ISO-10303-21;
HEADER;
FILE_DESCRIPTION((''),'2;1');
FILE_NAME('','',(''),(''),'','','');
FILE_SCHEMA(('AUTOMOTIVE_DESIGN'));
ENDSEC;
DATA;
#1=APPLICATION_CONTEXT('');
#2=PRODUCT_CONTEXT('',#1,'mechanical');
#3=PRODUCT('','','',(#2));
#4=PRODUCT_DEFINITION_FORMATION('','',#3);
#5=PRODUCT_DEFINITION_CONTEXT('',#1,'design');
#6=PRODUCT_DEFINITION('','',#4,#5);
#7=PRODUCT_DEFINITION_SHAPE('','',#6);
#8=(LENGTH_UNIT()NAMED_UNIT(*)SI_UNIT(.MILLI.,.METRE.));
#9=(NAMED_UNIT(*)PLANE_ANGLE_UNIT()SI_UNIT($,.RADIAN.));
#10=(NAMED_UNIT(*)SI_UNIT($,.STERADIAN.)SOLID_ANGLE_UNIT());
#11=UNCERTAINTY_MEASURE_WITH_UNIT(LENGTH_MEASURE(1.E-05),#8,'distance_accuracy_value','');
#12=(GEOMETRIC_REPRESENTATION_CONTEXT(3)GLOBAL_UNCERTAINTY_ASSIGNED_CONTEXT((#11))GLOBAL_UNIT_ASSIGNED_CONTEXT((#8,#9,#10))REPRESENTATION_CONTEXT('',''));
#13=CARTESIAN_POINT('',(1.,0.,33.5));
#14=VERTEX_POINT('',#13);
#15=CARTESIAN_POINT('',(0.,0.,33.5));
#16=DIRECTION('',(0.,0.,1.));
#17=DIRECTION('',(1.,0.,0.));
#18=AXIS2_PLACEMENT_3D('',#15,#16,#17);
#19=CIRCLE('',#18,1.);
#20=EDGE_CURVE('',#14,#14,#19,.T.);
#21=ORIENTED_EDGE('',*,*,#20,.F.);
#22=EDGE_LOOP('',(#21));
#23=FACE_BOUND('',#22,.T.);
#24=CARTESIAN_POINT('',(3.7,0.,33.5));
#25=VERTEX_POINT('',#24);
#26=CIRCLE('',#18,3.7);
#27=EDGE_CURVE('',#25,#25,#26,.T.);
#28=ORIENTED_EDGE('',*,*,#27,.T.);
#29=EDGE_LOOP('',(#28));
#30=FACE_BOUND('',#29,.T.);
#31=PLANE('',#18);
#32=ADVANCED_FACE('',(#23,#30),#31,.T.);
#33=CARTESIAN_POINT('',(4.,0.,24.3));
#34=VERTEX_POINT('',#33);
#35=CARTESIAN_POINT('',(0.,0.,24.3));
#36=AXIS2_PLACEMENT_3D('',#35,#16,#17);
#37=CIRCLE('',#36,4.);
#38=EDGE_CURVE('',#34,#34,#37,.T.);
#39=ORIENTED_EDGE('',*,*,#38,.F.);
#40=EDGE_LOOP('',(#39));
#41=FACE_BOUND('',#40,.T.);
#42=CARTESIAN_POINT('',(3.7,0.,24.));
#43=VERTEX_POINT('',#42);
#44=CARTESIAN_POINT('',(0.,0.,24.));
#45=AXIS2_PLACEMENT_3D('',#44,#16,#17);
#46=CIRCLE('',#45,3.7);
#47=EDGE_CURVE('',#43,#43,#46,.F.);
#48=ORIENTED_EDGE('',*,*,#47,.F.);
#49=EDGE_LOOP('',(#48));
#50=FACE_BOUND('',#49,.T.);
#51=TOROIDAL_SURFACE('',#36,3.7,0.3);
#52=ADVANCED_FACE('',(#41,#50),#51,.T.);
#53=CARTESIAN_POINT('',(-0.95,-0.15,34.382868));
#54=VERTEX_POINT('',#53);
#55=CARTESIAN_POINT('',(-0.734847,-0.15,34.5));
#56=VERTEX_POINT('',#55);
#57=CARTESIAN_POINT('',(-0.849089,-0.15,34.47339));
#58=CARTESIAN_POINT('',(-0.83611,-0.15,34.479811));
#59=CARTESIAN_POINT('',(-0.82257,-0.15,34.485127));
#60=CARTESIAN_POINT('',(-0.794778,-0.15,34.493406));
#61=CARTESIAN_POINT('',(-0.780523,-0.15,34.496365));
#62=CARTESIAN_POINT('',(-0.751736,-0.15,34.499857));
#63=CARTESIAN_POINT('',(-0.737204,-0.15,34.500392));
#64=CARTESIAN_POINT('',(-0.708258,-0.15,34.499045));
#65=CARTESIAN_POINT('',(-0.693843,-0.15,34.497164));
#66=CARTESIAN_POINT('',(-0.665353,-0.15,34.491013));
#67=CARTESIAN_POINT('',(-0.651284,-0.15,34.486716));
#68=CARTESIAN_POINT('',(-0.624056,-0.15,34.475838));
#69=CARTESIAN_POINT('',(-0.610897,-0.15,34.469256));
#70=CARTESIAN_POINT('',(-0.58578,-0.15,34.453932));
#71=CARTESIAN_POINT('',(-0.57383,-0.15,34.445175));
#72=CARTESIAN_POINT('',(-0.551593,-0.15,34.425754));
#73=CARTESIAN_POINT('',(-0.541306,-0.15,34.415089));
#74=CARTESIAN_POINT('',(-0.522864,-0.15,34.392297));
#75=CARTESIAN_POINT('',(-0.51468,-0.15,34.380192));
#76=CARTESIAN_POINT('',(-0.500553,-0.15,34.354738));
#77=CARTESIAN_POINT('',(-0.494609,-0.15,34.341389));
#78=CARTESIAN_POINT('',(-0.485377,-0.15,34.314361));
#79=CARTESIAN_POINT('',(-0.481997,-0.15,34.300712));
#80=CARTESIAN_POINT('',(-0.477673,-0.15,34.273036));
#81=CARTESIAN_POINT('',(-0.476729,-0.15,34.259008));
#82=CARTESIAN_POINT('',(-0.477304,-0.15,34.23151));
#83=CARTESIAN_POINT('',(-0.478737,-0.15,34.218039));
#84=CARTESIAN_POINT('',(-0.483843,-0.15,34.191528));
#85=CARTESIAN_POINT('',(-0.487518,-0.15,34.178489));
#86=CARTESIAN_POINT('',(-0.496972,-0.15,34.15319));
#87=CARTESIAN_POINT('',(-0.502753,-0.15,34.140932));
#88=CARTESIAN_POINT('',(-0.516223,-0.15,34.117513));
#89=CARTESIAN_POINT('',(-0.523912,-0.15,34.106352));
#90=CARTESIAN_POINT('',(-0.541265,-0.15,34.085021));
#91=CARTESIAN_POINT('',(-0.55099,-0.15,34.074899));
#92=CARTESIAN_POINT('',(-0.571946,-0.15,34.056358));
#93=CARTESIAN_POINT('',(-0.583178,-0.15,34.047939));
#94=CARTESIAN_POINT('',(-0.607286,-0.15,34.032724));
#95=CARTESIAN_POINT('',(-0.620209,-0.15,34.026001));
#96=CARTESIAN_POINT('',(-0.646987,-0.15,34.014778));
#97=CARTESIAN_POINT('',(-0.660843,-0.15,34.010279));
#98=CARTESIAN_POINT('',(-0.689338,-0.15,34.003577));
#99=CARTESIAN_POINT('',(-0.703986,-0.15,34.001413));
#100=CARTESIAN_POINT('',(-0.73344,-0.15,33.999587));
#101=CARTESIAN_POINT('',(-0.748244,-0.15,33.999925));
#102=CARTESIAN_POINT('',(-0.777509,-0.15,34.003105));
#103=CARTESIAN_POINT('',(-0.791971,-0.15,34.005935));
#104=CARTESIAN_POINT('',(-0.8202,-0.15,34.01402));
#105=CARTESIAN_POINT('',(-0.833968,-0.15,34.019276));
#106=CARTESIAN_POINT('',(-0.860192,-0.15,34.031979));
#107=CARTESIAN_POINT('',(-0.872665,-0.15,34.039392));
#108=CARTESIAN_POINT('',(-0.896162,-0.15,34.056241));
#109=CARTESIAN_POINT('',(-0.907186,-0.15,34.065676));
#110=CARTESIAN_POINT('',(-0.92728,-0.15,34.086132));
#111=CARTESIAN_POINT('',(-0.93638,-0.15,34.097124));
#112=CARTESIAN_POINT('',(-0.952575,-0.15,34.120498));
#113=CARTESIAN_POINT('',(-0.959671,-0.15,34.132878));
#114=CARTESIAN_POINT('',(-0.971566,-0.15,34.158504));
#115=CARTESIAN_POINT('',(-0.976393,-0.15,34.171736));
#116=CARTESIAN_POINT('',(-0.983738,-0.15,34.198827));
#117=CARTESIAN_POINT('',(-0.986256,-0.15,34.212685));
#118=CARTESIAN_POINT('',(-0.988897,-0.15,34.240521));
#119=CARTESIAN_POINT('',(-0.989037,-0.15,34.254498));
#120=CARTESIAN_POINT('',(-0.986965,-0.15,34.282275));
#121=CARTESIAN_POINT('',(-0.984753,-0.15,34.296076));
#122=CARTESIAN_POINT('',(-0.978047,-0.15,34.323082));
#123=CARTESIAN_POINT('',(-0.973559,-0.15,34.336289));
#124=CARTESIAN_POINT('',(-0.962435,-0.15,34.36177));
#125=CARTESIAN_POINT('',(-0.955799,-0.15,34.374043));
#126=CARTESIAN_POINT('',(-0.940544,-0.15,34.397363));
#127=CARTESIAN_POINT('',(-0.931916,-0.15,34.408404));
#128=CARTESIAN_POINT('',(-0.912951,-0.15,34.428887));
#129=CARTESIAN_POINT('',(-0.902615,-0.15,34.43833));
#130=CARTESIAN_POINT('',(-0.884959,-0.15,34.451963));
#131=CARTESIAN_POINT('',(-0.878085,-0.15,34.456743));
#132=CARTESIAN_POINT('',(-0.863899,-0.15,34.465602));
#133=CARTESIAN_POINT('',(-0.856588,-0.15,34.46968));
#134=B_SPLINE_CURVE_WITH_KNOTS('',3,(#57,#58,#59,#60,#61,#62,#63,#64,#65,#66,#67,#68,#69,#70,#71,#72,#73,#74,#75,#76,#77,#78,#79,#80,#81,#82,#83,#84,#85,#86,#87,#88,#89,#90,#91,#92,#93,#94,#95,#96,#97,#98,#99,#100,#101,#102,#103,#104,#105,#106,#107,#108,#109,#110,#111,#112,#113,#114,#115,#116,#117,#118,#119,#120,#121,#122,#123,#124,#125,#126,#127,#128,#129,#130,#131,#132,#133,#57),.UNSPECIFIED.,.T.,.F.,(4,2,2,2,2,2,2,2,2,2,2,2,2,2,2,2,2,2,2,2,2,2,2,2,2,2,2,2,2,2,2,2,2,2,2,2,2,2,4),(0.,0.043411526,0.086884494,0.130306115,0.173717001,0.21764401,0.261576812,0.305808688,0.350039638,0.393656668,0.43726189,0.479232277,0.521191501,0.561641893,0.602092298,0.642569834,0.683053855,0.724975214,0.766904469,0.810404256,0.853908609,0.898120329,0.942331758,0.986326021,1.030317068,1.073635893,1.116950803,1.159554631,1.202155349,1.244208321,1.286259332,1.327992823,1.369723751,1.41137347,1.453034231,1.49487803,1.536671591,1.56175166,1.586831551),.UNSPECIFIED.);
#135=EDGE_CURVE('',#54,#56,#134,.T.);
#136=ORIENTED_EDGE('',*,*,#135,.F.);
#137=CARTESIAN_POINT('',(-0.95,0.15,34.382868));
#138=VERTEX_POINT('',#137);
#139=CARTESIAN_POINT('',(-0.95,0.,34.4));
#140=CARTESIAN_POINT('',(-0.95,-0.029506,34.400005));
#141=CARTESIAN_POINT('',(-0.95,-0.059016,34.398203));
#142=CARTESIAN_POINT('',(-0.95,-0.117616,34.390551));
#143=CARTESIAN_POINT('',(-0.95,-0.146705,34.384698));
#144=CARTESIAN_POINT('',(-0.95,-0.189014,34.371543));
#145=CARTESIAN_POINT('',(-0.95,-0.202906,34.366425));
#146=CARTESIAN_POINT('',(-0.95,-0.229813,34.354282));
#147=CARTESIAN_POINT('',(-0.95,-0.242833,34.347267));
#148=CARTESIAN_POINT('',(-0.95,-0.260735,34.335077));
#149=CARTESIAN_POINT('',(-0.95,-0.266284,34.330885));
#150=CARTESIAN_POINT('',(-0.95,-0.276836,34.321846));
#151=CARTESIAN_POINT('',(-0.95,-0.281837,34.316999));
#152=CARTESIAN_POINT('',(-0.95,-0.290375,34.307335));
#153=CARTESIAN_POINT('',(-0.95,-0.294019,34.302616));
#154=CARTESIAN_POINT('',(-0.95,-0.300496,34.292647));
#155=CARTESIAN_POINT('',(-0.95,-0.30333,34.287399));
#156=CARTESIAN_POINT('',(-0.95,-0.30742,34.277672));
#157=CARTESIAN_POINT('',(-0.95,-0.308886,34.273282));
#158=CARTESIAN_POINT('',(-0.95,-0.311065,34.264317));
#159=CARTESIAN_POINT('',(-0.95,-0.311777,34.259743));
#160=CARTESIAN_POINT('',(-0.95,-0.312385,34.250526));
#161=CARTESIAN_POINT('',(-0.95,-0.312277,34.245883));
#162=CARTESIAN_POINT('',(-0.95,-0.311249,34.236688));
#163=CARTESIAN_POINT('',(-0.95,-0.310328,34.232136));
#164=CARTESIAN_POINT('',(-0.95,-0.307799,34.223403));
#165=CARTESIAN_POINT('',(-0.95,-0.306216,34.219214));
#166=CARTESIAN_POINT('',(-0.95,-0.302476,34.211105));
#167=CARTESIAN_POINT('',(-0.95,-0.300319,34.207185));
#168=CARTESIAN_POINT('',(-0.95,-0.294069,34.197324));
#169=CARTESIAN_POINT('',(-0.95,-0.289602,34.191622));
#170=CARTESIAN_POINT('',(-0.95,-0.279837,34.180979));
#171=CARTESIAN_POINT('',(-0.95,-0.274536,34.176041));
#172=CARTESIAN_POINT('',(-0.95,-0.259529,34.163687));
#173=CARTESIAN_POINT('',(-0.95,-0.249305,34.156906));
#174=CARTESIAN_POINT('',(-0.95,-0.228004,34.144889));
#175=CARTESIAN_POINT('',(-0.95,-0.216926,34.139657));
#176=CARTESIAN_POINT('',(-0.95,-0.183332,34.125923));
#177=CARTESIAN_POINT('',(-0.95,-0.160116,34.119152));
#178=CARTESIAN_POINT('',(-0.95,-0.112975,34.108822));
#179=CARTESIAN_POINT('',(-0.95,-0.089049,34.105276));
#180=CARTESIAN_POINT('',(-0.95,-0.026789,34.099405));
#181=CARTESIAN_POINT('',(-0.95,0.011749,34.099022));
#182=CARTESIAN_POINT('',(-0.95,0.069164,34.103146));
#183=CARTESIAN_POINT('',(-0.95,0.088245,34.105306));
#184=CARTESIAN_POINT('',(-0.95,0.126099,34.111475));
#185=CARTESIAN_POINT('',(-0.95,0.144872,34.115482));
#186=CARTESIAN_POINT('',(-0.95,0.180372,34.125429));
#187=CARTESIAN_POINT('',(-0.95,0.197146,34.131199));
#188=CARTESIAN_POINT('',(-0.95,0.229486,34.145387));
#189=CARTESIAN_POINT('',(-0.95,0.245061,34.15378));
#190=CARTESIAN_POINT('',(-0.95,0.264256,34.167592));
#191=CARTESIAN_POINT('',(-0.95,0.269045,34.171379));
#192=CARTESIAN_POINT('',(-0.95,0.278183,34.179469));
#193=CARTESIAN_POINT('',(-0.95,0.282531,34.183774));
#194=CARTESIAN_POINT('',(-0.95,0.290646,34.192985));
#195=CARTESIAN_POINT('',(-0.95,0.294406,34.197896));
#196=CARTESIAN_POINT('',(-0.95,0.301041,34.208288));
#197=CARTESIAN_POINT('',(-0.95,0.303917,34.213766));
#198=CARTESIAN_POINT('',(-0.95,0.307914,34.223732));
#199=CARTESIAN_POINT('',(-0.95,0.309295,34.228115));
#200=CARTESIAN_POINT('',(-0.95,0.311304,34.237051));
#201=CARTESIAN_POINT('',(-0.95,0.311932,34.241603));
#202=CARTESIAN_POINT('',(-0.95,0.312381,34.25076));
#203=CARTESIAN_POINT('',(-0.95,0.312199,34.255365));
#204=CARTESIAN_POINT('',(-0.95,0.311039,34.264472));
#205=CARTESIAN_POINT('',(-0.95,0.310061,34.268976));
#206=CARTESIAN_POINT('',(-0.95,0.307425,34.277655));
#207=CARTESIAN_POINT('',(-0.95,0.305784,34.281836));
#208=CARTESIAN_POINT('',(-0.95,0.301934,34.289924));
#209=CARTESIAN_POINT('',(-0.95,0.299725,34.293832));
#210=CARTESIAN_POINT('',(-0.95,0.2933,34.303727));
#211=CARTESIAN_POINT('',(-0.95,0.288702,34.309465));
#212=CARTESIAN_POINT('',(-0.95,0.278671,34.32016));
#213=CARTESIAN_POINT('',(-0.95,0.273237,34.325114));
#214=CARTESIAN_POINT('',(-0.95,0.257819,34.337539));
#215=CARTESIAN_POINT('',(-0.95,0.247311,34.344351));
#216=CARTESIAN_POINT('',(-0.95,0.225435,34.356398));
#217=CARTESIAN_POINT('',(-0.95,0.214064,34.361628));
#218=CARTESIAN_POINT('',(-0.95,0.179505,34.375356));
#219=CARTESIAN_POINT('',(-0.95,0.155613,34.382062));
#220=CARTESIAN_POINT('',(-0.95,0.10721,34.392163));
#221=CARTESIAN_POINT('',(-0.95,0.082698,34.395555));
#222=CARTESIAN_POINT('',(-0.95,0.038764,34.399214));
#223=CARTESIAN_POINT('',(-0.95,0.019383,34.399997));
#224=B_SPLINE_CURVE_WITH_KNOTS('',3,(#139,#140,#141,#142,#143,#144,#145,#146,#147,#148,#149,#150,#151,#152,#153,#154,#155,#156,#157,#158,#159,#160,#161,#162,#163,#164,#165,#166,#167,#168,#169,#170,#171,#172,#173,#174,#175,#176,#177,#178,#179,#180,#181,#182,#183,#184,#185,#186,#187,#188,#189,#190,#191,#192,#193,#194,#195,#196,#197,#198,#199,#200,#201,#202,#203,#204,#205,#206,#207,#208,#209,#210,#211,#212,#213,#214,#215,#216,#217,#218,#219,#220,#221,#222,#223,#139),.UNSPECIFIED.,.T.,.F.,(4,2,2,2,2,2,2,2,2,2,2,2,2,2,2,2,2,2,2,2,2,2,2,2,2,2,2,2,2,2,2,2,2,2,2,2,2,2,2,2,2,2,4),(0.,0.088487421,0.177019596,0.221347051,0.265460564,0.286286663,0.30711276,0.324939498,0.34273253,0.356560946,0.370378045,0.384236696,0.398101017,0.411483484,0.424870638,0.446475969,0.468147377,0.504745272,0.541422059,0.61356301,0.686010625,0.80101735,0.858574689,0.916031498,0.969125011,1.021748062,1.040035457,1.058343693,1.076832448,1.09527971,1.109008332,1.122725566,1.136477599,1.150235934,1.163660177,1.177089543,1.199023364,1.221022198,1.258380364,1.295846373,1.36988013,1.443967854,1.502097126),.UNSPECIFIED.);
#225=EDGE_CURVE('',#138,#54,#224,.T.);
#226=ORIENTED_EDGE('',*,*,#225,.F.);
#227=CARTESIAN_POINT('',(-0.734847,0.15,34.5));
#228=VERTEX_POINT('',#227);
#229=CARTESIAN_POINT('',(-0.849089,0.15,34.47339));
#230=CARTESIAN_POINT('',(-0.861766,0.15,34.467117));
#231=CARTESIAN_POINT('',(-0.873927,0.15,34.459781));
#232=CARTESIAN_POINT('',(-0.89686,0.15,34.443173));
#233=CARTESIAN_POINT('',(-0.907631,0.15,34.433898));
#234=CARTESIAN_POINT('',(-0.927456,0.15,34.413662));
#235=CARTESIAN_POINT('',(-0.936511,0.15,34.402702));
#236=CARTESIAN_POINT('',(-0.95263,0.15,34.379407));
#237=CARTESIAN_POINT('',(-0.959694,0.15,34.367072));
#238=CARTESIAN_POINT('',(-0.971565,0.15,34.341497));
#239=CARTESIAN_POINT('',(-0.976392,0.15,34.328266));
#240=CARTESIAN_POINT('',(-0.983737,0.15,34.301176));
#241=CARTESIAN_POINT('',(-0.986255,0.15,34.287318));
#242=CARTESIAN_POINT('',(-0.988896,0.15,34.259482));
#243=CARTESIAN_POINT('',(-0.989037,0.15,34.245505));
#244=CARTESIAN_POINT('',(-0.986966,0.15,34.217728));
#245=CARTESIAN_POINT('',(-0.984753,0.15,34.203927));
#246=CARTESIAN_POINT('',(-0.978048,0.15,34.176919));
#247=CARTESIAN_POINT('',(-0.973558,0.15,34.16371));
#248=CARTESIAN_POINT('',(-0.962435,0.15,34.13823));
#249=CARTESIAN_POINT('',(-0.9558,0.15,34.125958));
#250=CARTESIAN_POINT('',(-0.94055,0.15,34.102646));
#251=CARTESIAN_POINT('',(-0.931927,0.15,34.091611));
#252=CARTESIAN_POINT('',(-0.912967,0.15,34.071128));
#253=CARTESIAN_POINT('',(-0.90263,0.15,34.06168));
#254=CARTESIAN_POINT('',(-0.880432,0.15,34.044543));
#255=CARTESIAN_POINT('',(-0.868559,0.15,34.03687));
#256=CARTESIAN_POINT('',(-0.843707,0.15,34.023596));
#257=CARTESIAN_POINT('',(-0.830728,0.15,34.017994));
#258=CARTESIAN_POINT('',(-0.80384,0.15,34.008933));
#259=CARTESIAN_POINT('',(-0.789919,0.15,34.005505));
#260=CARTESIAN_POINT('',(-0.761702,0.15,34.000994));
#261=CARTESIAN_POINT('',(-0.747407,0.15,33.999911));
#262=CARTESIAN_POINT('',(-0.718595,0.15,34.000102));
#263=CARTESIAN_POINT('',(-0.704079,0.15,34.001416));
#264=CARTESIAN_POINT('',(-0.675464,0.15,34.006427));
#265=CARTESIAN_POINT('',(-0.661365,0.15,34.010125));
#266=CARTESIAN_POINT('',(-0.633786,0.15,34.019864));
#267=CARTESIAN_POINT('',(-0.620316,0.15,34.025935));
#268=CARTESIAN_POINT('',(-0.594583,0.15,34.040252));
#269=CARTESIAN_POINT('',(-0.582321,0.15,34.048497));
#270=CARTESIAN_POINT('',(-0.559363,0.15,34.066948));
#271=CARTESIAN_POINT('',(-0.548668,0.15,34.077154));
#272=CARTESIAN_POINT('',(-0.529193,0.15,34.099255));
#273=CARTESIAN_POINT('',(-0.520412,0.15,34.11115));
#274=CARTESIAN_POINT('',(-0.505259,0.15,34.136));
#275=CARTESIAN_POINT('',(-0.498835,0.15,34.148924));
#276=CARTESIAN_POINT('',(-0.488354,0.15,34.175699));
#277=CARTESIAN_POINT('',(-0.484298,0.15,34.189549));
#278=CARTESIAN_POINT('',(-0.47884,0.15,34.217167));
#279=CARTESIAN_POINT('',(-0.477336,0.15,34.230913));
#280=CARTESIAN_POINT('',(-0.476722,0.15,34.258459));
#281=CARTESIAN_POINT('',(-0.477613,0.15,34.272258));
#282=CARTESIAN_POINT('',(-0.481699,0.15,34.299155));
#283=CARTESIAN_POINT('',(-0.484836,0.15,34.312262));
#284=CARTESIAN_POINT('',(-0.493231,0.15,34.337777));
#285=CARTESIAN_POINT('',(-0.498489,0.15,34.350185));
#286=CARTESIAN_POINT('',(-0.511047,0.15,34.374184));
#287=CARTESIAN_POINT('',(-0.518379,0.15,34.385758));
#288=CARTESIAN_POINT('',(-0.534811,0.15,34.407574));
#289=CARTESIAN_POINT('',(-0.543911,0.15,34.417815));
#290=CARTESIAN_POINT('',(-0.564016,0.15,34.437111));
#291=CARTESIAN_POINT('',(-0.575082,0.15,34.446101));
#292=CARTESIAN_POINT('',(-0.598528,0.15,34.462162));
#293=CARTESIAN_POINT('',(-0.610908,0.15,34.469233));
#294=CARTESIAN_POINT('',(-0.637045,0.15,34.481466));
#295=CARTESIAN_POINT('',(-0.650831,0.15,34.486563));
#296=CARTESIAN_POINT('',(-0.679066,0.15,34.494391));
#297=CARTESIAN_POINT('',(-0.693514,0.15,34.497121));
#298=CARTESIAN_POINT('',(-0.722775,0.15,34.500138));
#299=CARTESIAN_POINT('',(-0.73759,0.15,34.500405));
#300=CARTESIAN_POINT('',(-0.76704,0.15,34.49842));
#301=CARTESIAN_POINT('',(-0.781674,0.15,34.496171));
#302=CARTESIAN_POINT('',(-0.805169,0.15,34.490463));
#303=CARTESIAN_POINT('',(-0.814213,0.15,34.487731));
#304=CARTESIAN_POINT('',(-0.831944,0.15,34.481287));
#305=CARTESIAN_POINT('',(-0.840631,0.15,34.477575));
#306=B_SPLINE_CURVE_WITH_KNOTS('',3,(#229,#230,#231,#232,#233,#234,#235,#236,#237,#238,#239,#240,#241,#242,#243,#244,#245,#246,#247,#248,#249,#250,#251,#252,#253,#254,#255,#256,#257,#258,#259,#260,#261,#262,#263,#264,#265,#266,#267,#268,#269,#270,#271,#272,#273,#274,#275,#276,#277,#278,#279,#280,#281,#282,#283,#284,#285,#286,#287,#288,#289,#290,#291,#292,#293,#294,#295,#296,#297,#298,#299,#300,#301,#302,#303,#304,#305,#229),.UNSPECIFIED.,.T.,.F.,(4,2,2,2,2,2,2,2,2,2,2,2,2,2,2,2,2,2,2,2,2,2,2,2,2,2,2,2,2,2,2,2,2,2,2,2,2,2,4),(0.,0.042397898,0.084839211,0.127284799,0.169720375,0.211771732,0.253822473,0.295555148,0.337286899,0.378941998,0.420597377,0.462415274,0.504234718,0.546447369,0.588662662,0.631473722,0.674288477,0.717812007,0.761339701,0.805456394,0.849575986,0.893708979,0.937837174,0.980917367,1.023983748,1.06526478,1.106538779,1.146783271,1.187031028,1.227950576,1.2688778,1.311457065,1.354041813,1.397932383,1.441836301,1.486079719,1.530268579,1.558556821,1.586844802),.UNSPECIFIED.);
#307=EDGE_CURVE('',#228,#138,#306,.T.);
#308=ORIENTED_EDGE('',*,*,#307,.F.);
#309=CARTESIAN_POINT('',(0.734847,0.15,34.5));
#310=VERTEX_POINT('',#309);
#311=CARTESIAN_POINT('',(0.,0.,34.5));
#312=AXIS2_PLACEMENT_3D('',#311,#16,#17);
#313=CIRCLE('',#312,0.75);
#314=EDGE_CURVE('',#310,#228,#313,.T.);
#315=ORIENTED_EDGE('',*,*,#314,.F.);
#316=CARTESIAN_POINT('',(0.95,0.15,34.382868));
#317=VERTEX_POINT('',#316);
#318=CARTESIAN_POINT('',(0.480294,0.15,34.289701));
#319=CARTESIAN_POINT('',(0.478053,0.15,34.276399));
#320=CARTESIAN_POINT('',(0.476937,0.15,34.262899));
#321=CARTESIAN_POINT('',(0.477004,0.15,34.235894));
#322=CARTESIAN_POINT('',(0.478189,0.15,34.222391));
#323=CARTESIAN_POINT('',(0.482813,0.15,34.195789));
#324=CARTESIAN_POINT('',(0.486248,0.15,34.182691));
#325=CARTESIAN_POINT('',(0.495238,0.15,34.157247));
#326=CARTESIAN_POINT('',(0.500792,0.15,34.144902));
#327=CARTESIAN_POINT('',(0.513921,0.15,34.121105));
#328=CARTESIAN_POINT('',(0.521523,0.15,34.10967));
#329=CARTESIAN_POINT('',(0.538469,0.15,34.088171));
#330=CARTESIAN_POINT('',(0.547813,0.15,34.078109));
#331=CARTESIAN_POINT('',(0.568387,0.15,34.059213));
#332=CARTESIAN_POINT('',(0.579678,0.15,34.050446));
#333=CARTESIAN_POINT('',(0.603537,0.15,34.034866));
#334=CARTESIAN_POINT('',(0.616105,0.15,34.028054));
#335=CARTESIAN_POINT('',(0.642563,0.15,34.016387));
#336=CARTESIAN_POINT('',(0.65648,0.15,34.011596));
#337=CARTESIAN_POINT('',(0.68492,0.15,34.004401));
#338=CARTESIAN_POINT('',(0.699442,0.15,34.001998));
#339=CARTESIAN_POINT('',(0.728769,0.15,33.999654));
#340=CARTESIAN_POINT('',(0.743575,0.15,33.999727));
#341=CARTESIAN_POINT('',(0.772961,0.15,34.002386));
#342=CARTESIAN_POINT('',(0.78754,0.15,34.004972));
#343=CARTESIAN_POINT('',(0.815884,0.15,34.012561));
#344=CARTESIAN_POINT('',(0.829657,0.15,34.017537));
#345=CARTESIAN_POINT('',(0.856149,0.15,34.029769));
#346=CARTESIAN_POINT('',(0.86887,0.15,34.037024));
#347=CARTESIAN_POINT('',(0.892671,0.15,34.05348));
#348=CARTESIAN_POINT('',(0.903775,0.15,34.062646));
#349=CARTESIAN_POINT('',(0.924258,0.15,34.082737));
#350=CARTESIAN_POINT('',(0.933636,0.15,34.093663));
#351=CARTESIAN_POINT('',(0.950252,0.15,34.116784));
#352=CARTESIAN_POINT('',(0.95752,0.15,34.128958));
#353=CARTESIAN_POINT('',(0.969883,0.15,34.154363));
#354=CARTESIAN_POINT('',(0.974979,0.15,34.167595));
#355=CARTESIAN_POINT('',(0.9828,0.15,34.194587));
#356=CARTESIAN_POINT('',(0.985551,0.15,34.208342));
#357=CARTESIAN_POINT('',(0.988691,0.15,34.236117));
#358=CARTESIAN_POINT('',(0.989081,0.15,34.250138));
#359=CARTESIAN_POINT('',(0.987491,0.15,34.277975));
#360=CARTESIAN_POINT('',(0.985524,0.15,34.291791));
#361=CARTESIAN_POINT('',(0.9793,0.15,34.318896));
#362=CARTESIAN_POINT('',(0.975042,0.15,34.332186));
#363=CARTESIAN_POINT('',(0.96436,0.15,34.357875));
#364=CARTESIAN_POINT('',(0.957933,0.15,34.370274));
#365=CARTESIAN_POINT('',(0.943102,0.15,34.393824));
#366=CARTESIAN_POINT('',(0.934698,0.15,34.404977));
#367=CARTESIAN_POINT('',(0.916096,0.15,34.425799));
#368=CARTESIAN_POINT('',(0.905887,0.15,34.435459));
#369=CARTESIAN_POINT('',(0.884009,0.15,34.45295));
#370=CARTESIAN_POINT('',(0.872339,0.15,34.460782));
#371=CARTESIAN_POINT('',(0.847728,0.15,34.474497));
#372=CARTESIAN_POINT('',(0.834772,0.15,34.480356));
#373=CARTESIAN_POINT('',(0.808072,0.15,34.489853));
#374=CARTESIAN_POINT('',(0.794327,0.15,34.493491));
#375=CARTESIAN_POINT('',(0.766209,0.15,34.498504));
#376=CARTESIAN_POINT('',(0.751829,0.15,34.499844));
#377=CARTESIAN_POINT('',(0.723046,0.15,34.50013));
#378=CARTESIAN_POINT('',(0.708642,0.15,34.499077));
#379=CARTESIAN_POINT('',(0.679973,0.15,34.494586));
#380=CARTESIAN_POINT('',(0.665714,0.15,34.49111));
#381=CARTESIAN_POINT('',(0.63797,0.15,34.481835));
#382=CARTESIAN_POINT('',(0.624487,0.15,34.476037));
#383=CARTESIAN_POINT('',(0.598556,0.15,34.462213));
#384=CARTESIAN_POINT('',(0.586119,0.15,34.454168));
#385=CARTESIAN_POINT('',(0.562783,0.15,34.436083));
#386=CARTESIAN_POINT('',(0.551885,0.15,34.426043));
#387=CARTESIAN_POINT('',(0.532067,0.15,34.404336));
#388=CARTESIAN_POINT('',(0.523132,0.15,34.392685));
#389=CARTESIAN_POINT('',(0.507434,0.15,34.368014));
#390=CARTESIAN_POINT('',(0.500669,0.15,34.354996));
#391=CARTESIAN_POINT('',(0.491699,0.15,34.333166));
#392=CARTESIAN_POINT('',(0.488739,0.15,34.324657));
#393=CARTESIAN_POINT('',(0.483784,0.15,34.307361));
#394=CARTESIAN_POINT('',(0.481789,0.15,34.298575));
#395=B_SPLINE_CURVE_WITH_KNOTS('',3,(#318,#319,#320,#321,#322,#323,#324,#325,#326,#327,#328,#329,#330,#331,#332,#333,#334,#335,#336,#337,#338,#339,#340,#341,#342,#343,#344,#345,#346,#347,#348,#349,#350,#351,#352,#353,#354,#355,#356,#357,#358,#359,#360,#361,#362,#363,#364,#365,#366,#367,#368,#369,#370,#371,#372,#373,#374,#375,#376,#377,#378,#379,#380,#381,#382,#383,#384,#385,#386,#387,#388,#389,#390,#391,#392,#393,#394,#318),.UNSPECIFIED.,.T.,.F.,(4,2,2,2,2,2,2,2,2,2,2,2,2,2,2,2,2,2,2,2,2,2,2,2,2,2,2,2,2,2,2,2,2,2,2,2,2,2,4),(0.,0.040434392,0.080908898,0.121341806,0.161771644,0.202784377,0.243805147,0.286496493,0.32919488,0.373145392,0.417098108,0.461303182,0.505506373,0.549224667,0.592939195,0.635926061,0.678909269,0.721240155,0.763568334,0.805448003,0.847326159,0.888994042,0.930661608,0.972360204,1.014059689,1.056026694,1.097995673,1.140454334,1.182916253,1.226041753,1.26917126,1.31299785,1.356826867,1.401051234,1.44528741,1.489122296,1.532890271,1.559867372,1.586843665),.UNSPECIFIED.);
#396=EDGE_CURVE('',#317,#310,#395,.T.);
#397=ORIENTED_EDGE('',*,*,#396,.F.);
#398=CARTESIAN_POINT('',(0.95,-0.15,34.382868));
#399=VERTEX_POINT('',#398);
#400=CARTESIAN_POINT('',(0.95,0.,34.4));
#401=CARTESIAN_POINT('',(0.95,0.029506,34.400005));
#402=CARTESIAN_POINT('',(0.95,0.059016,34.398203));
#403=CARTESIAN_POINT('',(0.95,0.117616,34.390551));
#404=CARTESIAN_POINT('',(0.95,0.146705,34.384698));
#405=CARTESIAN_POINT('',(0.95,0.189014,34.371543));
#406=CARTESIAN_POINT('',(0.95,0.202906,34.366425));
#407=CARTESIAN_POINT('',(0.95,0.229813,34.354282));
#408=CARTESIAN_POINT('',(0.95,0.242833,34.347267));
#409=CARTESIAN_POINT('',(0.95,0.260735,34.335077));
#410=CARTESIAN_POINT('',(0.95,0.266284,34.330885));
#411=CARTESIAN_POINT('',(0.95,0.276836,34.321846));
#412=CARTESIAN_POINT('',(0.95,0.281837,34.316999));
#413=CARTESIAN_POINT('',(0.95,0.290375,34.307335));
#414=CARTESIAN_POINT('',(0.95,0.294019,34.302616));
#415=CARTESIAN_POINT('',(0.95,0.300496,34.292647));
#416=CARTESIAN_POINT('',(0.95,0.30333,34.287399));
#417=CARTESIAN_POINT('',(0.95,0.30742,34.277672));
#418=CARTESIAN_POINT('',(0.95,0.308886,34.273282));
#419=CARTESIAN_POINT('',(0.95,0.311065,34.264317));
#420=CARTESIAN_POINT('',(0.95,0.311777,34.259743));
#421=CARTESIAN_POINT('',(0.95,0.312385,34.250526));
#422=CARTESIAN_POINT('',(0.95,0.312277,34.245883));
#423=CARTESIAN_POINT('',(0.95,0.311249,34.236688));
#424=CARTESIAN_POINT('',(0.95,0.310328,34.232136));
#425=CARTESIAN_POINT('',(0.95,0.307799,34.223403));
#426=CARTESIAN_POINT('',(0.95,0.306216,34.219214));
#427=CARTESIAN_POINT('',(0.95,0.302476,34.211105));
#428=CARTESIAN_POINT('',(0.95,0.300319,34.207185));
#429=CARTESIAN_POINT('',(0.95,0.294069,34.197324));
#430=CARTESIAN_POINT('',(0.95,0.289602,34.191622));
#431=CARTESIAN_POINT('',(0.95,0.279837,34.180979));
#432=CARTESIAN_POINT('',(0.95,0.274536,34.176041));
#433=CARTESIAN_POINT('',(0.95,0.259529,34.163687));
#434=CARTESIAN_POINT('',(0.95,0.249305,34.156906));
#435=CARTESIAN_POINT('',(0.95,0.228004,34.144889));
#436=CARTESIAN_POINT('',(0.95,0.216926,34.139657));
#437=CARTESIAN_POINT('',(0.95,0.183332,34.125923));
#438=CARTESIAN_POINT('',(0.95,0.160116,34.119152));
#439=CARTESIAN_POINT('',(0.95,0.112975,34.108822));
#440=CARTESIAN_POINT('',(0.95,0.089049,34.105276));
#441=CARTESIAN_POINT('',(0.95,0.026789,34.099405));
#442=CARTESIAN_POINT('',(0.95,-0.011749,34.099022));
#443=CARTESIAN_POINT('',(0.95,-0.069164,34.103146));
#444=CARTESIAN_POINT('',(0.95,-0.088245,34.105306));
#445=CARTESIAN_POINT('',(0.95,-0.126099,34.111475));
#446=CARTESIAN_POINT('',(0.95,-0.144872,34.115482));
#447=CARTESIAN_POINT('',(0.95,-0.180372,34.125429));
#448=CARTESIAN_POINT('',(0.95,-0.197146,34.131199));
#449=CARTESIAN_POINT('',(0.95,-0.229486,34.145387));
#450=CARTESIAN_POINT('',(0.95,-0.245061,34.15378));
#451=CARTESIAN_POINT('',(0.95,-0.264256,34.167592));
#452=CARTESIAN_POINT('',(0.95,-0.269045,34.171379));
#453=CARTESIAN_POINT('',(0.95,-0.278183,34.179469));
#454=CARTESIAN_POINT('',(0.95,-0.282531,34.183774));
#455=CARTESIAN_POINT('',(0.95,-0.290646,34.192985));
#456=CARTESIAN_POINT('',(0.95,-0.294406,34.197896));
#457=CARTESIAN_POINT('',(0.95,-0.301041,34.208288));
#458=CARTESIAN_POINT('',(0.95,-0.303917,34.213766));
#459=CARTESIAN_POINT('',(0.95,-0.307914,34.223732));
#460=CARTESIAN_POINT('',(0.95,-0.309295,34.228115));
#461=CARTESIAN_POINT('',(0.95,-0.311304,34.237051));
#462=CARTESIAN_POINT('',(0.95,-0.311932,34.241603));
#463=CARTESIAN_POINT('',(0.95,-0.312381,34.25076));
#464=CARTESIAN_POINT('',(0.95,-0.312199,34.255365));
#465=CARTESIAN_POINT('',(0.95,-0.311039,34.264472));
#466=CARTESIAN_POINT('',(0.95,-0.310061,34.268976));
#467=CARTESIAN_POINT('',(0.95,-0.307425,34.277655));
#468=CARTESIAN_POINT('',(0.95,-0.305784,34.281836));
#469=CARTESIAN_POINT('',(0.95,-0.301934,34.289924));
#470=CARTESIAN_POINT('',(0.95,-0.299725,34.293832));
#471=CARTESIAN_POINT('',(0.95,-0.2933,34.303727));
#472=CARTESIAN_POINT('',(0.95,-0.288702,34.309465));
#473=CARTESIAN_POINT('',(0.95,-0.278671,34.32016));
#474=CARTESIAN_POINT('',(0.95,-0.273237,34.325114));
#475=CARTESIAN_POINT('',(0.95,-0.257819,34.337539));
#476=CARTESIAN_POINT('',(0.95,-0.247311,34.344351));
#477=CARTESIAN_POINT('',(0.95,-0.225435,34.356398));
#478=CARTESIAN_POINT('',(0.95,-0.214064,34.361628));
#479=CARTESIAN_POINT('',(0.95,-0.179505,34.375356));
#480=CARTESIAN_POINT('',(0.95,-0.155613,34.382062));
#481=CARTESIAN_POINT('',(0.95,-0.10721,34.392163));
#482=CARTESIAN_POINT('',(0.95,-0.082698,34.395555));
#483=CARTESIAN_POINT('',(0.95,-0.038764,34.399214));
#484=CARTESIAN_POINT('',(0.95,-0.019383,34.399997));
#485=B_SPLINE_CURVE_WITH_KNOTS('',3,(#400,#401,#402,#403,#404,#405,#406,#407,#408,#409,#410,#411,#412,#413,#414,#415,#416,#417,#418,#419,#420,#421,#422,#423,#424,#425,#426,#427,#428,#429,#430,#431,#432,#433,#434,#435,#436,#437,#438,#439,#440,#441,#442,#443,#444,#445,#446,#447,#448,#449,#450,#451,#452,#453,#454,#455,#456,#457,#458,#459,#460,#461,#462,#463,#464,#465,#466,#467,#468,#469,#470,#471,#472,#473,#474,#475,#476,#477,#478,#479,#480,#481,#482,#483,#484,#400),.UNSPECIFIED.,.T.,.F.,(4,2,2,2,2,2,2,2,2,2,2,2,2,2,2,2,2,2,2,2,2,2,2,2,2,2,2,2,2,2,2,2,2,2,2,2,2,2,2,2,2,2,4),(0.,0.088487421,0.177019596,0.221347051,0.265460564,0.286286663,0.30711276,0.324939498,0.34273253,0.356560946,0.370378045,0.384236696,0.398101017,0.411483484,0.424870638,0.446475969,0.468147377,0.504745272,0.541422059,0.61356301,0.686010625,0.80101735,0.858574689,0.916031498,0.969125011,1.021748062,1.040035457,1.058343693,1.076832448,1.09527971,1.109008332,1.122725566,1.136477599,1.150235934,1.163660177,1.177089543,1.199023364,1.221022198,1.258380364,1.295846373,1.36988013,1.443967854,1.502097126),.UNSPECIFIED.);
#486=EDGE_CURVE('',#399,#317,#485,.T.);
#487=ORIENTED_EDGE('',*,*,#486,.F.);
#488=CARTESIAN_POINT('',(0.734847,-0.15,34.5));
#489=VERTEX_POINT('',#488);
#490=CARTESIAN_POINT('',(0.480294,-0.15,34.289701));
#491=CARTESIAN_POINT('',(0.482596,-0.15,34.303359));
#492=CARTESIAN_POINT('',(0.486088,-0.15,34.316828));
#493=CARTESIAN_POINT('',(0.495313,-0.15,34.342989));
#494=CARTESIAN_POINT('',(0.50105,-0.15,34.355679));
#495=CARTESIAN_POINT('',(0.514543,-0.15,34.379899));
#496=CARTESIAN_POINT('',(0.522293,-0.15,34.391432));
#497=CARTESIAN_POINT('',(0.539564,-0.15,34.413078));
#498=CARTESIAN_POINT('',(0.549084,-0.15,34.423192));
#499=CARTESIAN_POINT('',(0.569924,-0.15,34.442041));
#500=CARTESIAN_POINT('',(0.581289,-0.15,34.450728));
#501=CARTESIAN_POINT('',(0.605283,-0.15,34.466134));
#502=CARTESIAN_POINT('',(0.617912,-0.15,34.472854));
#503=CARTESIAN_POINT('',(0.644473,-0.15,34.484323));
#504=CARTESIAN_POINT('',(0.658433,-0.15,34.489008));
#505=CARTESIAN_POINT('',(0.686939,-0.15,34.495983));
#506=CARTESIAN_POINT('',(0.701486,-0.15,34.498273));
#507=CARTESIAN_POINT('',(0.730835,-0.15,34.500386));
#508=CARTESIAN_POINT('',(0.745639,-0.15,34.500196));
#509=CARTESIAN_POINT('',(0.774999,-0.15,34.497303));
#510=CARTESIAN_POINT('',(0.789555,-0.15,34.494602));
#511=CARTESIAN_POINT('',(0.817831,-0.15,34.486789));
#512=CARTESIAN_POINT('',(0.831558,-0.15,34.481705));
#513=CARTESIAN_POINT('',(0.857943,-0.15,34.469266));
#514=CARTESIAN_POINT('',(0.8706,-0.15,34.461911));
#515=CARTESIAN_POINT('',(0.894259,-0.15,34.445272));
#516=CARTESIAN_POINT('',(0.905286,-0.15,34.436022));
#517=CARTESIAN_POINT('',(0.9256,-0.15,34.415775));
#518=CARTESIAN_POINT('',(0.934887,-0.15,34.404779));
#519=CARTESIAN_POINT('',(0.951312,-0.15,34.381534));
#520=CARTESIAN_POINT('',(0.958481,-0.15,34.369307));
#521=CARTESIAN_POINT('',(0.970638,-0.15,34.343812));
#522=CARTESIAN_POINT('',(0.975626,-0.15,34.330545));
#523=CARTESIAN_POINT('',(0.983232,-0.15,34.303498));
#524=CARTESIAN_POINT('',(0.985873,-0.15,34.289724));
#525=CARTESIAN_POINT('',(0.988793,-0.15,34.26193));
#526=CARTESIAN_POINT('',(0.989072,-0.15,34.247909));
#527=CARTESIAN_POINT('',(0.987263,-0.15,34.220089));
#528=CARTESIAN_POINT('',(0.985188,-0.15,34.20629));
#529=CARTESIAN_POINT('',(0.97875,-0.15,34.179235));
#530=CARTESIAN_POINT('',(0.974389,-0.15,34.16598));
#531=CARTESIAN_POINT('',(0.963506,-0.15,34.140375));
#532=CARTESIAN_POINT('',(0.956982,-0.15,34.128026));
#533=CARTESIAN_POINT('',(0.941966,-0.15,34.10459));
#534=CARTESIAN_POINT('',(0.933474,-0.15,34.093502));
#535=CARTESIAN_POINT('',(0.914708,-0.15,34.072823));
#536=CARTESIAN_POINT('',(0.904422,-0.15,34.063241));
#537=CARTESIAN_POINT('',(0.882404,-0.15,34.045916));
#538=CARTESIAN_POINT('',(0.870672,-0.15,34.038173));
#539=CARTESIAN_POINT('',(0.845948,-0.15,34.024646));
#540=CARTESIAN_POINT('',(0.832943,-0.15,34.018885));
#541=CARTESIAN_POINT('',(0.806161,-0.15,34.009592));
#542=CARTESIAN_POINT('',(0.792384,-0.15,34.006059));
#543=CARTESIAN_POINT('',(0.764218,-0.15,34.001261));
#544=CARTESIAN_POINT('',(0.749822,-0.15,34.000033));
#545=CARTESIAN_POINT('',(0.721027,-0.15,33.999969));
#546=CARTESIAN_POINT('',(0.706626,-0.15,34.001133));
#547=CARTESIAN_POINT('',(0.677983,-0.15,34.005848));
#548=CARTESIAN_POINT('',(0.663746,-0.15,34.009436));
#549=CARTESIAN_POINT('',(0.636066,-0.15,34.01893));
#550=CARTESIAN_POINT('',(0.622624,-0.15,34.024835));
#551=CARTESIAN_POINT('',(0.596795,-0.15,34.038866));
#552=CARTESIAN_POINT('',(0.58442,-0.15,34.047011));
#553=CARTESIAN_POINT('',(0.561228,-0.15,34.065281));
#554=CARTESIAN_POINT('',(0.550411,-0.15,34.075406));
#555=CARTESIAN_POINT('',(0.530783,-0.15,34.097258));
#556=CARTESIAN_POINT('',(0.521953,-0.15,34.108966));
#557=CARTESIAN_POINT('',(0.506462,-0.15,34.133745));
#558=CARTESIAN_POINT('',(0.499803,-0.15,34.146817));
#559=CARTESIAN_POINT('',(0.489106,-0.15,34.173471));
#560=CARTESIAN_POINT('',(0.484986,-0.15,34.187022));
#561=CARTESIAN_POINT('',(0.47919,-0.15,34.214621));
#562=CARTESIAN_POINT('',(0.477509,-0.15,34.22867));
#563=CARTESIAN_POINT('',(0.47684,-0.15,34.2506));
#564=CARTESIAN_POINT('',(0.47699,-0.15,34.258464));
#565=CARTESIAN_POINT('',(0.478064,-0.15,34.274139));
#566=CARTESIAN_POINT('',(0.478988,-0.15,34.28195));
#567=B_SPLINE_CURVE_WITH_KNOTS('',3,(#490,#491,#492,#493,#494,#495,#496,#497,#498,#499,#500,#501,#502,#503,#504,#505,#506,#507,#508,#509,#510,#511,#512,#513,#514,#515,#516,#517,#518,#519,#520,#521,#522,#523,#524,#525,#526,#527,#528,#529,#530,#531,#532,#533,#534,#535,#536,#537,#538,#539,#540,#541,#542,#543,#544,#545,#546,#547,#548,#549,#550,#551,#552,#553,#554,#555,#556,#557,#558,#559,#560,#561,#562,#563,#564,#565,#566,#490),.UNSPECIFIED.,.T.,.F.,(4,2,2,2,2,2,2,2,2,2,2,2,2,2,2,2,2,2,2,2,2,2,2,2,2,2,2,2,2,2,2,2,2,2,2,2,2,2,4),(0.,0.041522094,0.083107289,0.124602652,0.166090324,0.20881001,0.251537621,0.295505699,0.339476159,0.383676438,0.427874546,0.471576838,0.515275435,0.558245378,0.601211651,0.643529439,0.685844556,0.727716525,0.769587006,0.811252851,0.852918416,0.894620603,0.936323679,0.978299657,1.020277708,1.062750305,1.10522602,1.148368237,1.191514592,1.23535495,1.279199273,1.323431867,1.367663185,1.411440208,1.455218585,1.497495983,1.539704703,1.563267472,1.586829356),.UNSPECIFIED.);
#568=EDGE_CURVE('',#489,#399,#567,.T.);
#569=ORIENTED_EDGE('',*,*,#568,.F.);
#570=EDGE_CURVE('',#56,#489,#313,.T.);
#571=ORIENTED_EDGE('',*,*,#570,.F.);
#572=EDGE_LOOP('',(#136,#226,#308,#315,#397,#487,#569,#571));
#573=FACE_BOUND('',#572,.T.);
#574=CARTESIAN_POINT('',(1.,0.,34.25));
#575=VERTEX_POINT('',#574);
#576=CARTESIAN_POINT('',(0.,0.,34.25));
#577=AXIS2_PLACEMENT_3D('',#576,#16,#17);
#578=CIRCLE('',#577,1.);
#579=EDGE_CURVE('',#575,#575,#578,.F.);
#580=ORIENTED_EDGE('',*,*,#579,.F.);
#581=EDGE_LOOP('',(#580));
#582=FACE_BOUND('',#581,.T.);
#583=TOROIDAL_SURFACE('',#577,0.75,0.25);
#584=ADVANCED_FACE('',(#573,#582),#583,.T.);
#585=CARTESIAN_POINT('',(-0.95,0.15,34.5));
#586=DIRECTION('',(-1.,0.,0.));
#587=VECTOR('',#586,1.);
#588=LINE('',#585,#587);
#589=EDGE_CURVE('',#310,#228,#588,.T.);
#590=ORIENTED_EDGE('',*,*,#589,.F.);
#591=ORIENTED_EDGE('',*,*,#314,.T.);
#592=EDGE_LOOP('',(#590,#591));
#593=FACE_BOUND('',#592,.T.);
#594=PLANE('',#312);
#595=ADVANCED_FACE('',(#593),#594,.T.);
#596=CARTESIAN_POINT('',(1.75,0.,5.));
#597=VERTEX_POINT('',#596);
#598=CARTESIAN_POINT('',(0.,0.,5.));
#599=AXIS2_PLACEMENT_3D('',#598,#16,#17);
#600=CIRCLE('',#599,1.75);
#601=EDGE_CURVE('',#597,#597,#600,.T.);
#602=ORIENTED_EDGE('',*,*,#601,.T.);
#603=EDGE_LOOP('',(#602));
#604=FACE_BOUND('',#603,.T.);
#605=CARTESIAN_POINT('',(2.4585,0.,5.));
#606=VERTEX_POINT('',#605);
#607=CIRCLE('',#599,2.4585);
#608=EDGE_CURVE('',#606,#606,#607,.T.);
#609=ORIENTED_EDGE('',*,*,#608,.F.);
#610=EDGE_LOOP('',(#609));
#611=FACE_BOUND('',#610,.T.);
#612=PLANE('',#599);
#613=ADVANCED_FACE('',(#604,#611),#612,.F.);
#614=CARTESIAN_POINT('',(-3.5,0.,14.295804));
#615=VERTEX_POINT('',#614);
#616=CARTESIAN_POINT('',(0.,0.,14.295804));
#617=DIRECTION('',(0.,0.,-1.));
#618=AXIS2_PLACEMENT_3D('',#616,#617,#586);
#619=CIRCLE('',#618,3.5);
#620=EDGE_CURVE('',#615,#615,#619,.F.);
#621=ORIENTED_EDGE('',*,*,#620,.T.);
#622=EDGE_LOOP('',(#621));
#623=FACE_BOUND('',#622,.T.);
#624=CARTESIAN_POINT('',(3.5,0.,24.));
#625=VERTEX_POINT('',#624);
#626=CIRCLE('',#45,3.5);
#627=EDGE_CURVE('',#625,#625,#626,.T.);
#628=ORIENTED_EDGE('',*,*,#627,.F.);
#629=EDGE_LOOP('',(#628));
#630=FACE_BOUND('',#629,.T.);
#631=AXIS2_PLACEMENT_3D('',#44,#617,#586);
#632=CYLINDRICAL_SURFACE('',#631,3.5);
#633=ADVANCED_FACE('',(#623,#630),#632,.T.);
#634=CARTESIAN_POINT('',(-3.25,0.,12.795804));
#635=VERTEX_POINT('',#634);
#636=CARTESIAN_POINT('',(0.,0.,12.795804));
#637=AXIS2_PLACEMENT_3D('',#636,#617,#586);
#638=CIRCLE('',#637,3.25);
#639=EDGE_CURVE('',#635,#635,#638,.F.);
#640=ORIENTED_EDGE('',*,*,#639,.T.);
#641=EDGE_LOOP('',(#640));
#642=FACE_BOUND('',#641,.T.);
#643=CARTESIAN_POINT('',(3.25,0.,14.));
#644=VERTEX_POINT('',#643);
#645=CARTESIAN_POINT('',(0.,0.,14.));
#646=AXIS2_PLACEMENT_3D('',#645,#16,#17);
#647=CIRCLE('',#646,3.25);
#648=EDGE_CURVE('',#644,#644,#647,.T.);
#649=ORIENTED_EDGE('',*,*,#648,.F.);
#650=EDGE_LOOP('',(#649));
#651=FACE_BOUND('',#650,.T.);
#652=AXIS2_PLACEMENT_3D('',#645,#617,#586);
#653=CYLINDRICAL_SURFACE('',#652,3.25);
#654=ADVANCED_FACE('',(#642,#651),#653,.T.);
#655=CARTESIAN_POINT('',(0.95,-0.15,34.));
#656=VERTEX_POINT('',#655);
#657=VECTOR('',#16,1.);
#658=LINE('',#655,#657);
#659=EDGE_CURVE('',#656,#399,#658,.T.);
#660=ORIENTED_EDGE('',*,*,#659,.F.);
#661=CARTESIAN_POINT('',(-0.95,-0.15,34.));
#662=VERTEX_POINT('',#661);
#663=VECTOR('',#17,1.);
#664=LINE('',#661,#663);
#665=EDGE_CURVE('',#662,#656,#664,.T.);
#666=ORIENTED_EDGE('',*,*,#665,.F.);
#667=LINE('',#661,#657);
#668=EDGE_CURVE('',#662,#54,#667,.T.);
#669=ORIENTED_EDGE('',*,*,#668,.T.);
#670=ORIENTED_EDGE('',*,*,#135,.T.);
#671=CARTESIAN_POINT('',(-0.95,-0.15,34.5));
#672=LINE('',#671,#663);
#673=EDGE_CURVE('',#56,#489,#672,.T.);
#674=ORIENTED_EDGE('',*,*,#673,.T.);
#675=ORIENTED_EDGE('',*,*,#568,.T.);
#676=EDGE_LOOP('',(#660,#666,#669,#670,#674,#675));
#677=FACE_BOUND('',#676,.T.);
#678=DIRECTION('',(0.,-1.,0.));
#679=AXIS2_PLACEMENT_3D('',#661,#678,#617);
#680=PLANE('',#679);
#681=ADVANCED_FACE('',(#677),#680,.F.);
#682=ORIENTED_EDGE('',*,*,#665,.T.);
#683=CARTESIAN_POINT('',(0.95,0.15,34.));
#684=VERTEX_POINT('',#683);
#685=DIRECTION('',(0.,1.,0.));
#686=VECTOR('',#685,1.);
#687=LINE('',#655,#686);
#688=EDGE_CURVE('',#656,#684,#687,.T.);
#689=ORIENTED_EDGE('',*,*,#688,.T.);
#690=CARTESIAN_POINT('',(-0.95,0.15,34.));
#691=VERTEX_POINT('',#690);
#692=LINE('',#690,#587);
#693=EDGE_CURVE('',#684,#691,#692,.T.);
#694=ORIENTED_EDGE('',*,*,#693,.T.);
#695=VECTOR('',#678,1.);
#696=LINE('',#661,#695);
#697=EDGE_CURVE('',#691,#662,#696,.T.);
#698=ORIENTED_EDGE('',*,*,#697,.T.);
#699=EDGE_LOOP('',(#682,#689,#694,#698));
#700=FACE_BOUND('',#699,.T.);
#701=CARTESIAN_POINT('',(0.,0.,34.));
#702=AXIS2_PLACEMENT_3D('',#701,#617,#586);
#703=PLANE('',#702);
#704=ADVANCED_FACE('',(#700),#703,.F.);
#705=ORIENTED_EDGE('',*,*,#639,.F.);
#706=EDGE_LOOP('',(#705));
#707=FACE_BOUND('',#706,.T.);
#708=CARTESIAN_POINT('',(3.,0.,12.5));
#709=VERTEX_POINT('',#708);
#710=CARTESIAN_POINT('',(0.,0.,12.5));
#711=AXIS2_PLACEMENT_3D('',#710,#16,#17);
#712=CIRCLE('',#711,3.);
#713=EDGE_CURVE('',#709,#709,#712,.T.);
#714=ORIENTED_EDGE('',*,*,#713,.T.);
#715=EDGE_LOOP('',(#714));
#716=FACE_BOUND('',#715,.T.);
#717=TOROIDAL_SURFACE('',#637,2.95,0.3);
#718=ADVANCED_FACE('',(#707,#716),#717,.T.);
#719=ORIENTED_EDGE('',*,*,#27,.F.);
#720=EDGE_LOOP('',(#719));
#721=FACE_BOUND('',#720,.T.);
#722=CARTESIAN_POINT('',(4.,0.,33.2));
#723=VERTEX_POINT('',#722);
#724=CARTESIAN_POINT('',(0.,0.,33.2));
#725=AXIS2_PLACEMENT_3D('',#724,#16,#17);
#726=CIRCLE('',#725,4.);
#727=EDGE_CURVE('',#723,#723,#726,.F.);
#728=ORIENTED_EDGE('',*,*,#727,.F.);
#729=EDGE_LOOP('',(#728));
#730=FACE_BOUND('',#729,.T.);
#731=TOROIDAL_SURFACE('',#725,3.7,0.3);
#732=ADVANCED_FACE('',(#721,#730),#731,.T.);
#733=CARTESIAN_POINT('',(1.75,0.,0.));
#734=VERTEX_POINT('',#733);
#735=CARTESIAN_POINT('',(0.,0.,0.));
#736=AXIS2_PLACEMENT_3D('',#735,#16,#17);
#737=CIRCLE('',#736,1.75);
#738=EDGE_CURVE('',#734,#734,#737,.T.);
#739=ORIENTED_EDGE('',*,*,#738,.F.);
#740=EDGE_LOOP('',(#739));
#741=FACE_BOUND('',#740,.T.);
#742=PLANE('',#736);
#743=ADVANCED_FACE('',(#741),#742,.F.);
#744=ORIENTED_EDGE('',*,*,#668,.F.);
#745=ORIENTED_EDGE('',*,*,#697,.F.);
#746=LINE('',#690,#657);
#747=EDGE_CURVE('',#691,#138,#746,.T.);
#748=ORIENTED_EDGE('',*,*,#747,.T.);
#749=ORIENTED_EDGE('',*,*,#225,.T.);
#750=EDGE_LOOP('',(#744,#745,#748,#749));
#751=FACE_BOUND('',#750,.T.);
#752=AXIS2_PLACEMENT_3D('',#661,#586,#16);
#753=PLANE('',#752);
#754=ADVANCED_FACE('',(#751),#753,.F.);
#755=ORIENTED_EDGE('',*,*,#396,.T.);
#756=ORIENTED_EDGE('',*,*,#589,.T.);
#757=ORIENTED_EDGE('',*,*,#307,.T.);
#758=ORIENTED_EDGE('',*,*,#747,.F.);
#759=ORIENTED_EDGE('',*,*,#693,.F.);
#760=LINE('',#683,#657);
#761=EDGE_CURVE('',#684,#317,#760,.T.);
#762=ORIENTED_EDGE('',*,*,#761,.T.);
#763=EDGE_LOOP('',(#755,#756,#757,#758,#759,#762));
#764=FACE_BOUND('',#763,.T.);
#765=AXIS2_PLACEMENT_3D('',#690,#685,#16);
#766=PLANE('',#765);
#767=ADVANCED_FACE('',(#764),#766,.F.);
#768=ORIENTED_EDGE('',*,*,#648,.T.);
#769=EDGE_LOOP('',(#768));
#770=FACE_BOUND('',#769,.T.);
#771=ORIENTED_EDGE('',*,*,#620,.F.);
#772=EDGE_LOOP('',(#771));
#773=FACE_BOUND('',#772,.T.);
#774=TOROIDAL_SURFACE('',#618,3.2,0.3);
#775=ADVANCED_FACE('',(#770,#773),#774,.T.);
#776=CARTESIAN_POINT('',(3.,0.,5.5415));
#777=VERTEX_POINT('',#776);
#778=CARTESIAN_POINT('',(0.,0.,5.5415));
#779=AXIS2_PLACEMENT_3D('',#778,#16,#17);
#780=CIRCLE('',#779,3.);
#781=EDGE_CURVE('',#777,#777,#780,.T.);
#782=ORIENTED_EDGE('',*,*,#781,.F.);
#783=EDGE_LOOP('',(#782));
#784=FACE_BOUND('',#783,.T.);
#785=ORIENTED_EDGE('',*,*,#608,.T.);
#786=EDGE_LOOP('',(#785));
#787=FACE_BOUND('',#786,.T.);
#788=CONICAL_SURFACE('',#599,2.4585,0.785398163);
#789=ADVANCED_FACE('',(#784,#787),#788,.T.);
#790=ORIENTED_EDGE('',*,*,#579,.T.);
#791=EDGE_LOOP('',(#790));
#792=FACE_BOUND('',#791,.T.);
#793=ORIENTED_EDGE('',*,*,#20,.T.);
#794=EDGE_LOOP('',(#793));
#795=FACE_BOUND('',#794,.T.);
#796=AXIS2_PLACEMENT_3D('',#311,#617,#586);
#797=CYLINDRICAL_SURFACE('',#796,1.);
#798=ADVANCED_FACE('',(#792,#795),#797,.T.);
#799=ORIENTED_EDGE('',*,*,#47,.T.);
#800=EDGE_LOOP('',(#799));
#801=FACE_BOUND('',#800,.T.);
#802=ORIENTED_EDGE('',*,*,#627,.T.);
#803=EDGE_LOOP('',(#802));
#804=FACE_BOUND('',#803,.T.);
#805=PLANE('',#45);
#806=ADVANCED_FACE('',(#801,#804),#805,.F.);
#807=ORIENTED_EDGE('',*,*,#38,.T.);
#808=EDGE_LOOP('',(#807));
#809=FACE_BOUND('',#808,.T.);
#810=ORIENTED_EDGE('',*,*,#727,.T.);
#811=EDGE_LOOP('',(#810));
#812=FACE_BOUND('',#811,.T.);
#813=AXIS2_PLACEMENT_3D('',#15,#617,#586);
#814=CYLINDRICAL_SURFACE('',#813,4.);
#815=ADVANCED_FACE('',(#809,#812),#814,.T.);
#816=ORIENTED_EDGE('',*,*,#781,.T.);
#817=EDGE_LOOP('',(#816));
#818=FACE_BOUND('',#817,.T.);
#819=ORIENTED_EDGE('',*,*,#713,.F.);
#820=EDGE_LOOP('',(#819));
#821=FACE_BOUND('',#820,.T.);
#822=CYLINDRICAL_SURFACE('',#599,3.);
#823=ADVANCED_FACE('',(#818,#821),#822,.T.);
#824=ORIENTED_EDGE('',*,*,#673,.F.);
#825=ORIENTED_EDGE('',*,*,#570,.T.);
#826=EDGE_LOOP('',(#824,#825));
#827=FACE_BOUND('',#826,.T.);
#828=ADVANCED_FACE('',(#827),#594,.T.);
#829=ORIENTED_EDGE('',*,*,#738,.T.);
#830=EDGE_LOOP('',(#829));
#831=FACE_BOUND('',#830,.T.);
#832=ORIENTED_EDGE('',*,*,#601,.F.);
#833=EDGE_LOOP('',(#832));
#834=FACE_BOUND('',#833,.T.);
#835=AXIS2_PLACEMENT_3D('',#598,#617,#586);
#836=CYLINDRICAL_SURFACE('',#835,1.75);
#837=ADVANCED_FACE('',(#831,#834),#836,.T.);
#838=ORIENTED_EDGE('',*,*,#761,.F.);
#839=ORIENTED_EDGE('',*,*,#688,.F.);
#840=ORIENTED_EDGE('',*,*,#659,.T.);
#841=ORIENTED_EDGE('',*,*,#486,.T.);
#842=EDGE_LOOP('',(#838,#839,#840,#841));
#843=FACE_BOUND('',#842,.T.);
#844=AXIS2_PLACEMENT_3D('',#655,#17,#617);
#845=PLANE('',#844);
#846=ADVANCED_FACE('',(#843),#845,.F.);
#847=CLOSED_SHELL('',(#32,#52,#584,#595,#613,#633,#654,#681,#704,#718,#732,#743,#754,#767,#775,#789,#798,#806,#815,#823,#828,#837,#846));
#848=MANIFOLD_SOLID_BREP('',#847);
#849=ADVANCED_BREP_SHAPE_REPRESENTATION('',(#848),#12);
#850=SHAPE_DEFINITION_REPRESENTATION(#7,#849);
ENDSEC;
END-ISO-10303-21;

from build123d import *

# Parameters (mm, degrees)
SKETCH_1_R          = 1.75
EXTRUDE_1_DEPTH     = 5
SKETCH_2_R          = 3.5
EXTRUDE_2_DEPTH     = 4
SKETCH_3_R          = 3.5
EXTRUDE_3_DEPTH     = 1
CUT_EXTRUDE_START   = -1
SKETCH_25_R         = 3.5
CUT_EXTRUDE_1_DEPTH = 1
SKETCH_26_R         = 3
EXTRUDE_8_DEPTH     = 3.5
SKETCH_27_R         = 3.25
EXTRUDE_9_DEPTH     = 1.5
SKETCH_28_R         = 3.5
EXTRUDE_10_DEPTH    = 10
SKETCH_29_R         = 4
EXTRUDE_11_DEPTH    = 9.5
SKETCH_30_R         = 1
EXTRUDE_12_DEPTH    = 1
FILLET_1_R          = 0.25
FILLET_2_R          = 0.3
SKETCH_31_W         = 1.9
SKETCH_31_H         = 0.3
CUT_EXTRUDE_2_DEPTH = 0.5


# Read off the part's stored shape, not the designer's step: M6 机械螺纹 螺柱5
with BuildPart() as part:
    # 草图1 → 凸台-拉伸1 (new body)
    with BuildSketch(Plane.XY):
        Circle(SKETCH_1_R)
    extrude(amount=EXTRUDE_1_DEPTH)

    # 草图2 → 凸台-拉伸2 (add)
    with BuildSketch(Plane.XY.offset(5)):
        Circle(SKETCH_2_R)
    extrude(amount=EXTRUDE_2_DEPTH)

    # 草图3 → 凸台-拉伸3 (add)
    with BuildSketch(Plane.XY.offset(9)):
        Circle(SKETCH_3_R)
    extrude(amount=EXTRUDE_3_DEPTH)

    # M6 机械螺纹 螺柱5 outline → M6 机械螺纹 螺柱5 (revolve, cut)
    with BuildSketch(Plane.XZ):
        Polygon((2.4585, 5), (3.5, 5), (3.5, 9), (3, 9), (3, 5.5415), align=None)
    revolve(axis=Axis((0, 0, 0), (0, 0, 1)), mode=Mode.SUBTRACT)

    # 草图25 → 切除-拉伸1 (cut)
    with BuildSketch(Plane.XY.offset(10).offset(CUT_EXTRUDE_START)):
        Circle(SKETCH_25_R)
    extrude(amount=CUT_EXTRUDE_1_DEPTH, mode=Mode.SUBTRACT)

    # 草图26 → 凸台-拉伸8 (add)
    with BuildSketch(Plane.XY.offset(9)):
        Circle(SKETCH_26_R)
    extrude(amount=EXTRUDE_8_DEPTH)

    # 草图27 → 凸台-拉伸9 (add)
    with BuildSketch(Plane.XY.offset(12.5)):
        Circle(SKETCH_27_R)
    extrude(amount=EXTRUDE_9_DEPTH)

    # 草图28 → 凸台-拉伸10 (add)
    with BuildSketch(Plane.XY.offset(14)):
        Circle(SKETCH_28_R)
    extrude(amount=EXTRUDE_10_DEPTH)

    # 草图29 → 凸台-拉伸11 (add)
    with BuildSketch(Plane.XY.offset(24)):
        Circle(SKETCH_29_R)
    extrude(amount=EXTRUDE_11_DEPTH)

    # 草图30 → 凸台-拉伸12 (add)
    with BuildSketch(Plane.XY.offset(33.5)):
        Circle(SKETCH_30_R)
    extrude(amount=EXTRUDE_12_DEPTH)

    # 圆角1
    fillet_1_edges = [part.edges().sort_by_distance(p)[0] for p in [
        (-1, 0, 34.5),
    ]]
    fillet(fillet_1_edges, radius=FILLET_1_R)

    # 圆角2
    # the kernel refuses this fillet: 0.3 mm, written as the material it takes off along each edge
    with BuildSketch(Plane(origin=(0, 0, 12.5), x_dir=(1, 0, 0), z_dir=(0, -1, 0))) as fillet_2_piece_1:
        with BuildLine():
            CenterArc((2.95, 0.295803989), FILLET_2_R, 279.594068227, 80.405931773)
            Line((3, 0), (3.001, -0.00591608))
            ThreePointArc((3.001, -0.00591608), (3.125, -0.006), (3.25, -0.006))
            Line((3.25, -0.006), (3.256, 0))
            Line((3.256, 0), (3.256, 0.295803989))
            Line((3.256, 0.295803989), (3.25, 0.295803989))
        make_face()
    revolve(axis=Axis((0, 0, 12.5), (0, 0, 1)), mode=Mode.SUBTRACT)
    with BuildSketch(Plane(origin=(0, 0, 14), x_dir=(1, 0, 0), z_dir=(0, -1, 0))) as fillet_2_piece_2:
        with BuildLine():
            CenterArc((3.2, 0.295803989), FILLET_2_R, 279.594068227, 80.405931773)
            Line((3.25, 0), (3.251, -0.00591608))
            ThreePointArc((3.251, -0.00591608), (3.375, -0.006), (3.5, -0.006))
            Line((3.5, -0.006), (3.506, 0))
            Line((3.506, 0), (3.506, 0.295803989))
            Line((3.506, 0.295803989), (3.5, 0.295803989))
        make_face()
    revolve(axis=Axis((0, 0, 14), (0, 0, 1)), mode=Mode.SUBTRACT)
    with BuildSketch(Plane(origin=(0, 0, 24), x_dir=(1, 0, 0), z_dir=(0, -1, 0))) as fillet_2_piece_3:
        with BuildLine():
            CenterArc((4 - FILLET_2_R, FILLET_2_R), FILLET_2_R, 270, 90)
            Line((4 - FILLET_2_R, 0), (4 - FILLET_2_R, -FILLET_2_R * 0.02))
            Line((4 - FILLET_2_R, -FILLET_2_R * 0.02), (4 + FILLET_2_R * 0.02, -FILLET_2_R * 0.02))
            Line((4 + FILLET_2_R * 0.02, -FILLET_2_R * 0.02), (4 + FILLET_2_R * 0.02, FILLET_2_R))
            Line((4 + FILLET_2_R * 0.02, FILLET_2_R), (4, FILLET_2_R))
        make_face()
    revolve(axis=Axis((0, 0, 24), (0, 0, 1)), mode=Mode.SUBTRACT)
    with BuildSketch(Plane(origin=(0, 0, 33.5), x_dir=(1, 0, 0), z_dir=(0, -1, 0))) as fillet_2_piece_4:
        with BuildLine():
            CenterArc((4 - FILLET_2_R, -FILLET_2_R), FILLET_2_R, 0, 90)
            Line((4, -FILLET_2_R), (4 + FILLET_2_R * 0.02, -FILLET_2_R))
            Line((4 + FILLET_2_R * 0.02, -FILLET_2_R), (4 + FILLET_2_R * 0.02, FILLET_2_R * 0.02))
            Line((4 + FILLET_2_R * 0.02, FILLET_2_R * 0.02), (4 - FILLET_2_R, FILLET_2_R * 0.02))
            Line((4 - FILLET_2_R, FILLET_2_R * 0.02), (4 - FILLET_2_R, 0))
        make_face()
    revolve(axis=Axis((0, 0, 33.5), (0, 0, 1)), mode=Mode.SUBTRACT)

    # 草图31 → 切除-拉伸2 (cut)
    with BuildSketch(Plane.XY.offset(34.5)):
        Rectangle(SKETCH_31_W, SKETCH_31_H)
    extrude(amount=-CUT_EXTRUDE_2_DEPTH, mode=Mode.SUBTRACT)


solid = part.part
